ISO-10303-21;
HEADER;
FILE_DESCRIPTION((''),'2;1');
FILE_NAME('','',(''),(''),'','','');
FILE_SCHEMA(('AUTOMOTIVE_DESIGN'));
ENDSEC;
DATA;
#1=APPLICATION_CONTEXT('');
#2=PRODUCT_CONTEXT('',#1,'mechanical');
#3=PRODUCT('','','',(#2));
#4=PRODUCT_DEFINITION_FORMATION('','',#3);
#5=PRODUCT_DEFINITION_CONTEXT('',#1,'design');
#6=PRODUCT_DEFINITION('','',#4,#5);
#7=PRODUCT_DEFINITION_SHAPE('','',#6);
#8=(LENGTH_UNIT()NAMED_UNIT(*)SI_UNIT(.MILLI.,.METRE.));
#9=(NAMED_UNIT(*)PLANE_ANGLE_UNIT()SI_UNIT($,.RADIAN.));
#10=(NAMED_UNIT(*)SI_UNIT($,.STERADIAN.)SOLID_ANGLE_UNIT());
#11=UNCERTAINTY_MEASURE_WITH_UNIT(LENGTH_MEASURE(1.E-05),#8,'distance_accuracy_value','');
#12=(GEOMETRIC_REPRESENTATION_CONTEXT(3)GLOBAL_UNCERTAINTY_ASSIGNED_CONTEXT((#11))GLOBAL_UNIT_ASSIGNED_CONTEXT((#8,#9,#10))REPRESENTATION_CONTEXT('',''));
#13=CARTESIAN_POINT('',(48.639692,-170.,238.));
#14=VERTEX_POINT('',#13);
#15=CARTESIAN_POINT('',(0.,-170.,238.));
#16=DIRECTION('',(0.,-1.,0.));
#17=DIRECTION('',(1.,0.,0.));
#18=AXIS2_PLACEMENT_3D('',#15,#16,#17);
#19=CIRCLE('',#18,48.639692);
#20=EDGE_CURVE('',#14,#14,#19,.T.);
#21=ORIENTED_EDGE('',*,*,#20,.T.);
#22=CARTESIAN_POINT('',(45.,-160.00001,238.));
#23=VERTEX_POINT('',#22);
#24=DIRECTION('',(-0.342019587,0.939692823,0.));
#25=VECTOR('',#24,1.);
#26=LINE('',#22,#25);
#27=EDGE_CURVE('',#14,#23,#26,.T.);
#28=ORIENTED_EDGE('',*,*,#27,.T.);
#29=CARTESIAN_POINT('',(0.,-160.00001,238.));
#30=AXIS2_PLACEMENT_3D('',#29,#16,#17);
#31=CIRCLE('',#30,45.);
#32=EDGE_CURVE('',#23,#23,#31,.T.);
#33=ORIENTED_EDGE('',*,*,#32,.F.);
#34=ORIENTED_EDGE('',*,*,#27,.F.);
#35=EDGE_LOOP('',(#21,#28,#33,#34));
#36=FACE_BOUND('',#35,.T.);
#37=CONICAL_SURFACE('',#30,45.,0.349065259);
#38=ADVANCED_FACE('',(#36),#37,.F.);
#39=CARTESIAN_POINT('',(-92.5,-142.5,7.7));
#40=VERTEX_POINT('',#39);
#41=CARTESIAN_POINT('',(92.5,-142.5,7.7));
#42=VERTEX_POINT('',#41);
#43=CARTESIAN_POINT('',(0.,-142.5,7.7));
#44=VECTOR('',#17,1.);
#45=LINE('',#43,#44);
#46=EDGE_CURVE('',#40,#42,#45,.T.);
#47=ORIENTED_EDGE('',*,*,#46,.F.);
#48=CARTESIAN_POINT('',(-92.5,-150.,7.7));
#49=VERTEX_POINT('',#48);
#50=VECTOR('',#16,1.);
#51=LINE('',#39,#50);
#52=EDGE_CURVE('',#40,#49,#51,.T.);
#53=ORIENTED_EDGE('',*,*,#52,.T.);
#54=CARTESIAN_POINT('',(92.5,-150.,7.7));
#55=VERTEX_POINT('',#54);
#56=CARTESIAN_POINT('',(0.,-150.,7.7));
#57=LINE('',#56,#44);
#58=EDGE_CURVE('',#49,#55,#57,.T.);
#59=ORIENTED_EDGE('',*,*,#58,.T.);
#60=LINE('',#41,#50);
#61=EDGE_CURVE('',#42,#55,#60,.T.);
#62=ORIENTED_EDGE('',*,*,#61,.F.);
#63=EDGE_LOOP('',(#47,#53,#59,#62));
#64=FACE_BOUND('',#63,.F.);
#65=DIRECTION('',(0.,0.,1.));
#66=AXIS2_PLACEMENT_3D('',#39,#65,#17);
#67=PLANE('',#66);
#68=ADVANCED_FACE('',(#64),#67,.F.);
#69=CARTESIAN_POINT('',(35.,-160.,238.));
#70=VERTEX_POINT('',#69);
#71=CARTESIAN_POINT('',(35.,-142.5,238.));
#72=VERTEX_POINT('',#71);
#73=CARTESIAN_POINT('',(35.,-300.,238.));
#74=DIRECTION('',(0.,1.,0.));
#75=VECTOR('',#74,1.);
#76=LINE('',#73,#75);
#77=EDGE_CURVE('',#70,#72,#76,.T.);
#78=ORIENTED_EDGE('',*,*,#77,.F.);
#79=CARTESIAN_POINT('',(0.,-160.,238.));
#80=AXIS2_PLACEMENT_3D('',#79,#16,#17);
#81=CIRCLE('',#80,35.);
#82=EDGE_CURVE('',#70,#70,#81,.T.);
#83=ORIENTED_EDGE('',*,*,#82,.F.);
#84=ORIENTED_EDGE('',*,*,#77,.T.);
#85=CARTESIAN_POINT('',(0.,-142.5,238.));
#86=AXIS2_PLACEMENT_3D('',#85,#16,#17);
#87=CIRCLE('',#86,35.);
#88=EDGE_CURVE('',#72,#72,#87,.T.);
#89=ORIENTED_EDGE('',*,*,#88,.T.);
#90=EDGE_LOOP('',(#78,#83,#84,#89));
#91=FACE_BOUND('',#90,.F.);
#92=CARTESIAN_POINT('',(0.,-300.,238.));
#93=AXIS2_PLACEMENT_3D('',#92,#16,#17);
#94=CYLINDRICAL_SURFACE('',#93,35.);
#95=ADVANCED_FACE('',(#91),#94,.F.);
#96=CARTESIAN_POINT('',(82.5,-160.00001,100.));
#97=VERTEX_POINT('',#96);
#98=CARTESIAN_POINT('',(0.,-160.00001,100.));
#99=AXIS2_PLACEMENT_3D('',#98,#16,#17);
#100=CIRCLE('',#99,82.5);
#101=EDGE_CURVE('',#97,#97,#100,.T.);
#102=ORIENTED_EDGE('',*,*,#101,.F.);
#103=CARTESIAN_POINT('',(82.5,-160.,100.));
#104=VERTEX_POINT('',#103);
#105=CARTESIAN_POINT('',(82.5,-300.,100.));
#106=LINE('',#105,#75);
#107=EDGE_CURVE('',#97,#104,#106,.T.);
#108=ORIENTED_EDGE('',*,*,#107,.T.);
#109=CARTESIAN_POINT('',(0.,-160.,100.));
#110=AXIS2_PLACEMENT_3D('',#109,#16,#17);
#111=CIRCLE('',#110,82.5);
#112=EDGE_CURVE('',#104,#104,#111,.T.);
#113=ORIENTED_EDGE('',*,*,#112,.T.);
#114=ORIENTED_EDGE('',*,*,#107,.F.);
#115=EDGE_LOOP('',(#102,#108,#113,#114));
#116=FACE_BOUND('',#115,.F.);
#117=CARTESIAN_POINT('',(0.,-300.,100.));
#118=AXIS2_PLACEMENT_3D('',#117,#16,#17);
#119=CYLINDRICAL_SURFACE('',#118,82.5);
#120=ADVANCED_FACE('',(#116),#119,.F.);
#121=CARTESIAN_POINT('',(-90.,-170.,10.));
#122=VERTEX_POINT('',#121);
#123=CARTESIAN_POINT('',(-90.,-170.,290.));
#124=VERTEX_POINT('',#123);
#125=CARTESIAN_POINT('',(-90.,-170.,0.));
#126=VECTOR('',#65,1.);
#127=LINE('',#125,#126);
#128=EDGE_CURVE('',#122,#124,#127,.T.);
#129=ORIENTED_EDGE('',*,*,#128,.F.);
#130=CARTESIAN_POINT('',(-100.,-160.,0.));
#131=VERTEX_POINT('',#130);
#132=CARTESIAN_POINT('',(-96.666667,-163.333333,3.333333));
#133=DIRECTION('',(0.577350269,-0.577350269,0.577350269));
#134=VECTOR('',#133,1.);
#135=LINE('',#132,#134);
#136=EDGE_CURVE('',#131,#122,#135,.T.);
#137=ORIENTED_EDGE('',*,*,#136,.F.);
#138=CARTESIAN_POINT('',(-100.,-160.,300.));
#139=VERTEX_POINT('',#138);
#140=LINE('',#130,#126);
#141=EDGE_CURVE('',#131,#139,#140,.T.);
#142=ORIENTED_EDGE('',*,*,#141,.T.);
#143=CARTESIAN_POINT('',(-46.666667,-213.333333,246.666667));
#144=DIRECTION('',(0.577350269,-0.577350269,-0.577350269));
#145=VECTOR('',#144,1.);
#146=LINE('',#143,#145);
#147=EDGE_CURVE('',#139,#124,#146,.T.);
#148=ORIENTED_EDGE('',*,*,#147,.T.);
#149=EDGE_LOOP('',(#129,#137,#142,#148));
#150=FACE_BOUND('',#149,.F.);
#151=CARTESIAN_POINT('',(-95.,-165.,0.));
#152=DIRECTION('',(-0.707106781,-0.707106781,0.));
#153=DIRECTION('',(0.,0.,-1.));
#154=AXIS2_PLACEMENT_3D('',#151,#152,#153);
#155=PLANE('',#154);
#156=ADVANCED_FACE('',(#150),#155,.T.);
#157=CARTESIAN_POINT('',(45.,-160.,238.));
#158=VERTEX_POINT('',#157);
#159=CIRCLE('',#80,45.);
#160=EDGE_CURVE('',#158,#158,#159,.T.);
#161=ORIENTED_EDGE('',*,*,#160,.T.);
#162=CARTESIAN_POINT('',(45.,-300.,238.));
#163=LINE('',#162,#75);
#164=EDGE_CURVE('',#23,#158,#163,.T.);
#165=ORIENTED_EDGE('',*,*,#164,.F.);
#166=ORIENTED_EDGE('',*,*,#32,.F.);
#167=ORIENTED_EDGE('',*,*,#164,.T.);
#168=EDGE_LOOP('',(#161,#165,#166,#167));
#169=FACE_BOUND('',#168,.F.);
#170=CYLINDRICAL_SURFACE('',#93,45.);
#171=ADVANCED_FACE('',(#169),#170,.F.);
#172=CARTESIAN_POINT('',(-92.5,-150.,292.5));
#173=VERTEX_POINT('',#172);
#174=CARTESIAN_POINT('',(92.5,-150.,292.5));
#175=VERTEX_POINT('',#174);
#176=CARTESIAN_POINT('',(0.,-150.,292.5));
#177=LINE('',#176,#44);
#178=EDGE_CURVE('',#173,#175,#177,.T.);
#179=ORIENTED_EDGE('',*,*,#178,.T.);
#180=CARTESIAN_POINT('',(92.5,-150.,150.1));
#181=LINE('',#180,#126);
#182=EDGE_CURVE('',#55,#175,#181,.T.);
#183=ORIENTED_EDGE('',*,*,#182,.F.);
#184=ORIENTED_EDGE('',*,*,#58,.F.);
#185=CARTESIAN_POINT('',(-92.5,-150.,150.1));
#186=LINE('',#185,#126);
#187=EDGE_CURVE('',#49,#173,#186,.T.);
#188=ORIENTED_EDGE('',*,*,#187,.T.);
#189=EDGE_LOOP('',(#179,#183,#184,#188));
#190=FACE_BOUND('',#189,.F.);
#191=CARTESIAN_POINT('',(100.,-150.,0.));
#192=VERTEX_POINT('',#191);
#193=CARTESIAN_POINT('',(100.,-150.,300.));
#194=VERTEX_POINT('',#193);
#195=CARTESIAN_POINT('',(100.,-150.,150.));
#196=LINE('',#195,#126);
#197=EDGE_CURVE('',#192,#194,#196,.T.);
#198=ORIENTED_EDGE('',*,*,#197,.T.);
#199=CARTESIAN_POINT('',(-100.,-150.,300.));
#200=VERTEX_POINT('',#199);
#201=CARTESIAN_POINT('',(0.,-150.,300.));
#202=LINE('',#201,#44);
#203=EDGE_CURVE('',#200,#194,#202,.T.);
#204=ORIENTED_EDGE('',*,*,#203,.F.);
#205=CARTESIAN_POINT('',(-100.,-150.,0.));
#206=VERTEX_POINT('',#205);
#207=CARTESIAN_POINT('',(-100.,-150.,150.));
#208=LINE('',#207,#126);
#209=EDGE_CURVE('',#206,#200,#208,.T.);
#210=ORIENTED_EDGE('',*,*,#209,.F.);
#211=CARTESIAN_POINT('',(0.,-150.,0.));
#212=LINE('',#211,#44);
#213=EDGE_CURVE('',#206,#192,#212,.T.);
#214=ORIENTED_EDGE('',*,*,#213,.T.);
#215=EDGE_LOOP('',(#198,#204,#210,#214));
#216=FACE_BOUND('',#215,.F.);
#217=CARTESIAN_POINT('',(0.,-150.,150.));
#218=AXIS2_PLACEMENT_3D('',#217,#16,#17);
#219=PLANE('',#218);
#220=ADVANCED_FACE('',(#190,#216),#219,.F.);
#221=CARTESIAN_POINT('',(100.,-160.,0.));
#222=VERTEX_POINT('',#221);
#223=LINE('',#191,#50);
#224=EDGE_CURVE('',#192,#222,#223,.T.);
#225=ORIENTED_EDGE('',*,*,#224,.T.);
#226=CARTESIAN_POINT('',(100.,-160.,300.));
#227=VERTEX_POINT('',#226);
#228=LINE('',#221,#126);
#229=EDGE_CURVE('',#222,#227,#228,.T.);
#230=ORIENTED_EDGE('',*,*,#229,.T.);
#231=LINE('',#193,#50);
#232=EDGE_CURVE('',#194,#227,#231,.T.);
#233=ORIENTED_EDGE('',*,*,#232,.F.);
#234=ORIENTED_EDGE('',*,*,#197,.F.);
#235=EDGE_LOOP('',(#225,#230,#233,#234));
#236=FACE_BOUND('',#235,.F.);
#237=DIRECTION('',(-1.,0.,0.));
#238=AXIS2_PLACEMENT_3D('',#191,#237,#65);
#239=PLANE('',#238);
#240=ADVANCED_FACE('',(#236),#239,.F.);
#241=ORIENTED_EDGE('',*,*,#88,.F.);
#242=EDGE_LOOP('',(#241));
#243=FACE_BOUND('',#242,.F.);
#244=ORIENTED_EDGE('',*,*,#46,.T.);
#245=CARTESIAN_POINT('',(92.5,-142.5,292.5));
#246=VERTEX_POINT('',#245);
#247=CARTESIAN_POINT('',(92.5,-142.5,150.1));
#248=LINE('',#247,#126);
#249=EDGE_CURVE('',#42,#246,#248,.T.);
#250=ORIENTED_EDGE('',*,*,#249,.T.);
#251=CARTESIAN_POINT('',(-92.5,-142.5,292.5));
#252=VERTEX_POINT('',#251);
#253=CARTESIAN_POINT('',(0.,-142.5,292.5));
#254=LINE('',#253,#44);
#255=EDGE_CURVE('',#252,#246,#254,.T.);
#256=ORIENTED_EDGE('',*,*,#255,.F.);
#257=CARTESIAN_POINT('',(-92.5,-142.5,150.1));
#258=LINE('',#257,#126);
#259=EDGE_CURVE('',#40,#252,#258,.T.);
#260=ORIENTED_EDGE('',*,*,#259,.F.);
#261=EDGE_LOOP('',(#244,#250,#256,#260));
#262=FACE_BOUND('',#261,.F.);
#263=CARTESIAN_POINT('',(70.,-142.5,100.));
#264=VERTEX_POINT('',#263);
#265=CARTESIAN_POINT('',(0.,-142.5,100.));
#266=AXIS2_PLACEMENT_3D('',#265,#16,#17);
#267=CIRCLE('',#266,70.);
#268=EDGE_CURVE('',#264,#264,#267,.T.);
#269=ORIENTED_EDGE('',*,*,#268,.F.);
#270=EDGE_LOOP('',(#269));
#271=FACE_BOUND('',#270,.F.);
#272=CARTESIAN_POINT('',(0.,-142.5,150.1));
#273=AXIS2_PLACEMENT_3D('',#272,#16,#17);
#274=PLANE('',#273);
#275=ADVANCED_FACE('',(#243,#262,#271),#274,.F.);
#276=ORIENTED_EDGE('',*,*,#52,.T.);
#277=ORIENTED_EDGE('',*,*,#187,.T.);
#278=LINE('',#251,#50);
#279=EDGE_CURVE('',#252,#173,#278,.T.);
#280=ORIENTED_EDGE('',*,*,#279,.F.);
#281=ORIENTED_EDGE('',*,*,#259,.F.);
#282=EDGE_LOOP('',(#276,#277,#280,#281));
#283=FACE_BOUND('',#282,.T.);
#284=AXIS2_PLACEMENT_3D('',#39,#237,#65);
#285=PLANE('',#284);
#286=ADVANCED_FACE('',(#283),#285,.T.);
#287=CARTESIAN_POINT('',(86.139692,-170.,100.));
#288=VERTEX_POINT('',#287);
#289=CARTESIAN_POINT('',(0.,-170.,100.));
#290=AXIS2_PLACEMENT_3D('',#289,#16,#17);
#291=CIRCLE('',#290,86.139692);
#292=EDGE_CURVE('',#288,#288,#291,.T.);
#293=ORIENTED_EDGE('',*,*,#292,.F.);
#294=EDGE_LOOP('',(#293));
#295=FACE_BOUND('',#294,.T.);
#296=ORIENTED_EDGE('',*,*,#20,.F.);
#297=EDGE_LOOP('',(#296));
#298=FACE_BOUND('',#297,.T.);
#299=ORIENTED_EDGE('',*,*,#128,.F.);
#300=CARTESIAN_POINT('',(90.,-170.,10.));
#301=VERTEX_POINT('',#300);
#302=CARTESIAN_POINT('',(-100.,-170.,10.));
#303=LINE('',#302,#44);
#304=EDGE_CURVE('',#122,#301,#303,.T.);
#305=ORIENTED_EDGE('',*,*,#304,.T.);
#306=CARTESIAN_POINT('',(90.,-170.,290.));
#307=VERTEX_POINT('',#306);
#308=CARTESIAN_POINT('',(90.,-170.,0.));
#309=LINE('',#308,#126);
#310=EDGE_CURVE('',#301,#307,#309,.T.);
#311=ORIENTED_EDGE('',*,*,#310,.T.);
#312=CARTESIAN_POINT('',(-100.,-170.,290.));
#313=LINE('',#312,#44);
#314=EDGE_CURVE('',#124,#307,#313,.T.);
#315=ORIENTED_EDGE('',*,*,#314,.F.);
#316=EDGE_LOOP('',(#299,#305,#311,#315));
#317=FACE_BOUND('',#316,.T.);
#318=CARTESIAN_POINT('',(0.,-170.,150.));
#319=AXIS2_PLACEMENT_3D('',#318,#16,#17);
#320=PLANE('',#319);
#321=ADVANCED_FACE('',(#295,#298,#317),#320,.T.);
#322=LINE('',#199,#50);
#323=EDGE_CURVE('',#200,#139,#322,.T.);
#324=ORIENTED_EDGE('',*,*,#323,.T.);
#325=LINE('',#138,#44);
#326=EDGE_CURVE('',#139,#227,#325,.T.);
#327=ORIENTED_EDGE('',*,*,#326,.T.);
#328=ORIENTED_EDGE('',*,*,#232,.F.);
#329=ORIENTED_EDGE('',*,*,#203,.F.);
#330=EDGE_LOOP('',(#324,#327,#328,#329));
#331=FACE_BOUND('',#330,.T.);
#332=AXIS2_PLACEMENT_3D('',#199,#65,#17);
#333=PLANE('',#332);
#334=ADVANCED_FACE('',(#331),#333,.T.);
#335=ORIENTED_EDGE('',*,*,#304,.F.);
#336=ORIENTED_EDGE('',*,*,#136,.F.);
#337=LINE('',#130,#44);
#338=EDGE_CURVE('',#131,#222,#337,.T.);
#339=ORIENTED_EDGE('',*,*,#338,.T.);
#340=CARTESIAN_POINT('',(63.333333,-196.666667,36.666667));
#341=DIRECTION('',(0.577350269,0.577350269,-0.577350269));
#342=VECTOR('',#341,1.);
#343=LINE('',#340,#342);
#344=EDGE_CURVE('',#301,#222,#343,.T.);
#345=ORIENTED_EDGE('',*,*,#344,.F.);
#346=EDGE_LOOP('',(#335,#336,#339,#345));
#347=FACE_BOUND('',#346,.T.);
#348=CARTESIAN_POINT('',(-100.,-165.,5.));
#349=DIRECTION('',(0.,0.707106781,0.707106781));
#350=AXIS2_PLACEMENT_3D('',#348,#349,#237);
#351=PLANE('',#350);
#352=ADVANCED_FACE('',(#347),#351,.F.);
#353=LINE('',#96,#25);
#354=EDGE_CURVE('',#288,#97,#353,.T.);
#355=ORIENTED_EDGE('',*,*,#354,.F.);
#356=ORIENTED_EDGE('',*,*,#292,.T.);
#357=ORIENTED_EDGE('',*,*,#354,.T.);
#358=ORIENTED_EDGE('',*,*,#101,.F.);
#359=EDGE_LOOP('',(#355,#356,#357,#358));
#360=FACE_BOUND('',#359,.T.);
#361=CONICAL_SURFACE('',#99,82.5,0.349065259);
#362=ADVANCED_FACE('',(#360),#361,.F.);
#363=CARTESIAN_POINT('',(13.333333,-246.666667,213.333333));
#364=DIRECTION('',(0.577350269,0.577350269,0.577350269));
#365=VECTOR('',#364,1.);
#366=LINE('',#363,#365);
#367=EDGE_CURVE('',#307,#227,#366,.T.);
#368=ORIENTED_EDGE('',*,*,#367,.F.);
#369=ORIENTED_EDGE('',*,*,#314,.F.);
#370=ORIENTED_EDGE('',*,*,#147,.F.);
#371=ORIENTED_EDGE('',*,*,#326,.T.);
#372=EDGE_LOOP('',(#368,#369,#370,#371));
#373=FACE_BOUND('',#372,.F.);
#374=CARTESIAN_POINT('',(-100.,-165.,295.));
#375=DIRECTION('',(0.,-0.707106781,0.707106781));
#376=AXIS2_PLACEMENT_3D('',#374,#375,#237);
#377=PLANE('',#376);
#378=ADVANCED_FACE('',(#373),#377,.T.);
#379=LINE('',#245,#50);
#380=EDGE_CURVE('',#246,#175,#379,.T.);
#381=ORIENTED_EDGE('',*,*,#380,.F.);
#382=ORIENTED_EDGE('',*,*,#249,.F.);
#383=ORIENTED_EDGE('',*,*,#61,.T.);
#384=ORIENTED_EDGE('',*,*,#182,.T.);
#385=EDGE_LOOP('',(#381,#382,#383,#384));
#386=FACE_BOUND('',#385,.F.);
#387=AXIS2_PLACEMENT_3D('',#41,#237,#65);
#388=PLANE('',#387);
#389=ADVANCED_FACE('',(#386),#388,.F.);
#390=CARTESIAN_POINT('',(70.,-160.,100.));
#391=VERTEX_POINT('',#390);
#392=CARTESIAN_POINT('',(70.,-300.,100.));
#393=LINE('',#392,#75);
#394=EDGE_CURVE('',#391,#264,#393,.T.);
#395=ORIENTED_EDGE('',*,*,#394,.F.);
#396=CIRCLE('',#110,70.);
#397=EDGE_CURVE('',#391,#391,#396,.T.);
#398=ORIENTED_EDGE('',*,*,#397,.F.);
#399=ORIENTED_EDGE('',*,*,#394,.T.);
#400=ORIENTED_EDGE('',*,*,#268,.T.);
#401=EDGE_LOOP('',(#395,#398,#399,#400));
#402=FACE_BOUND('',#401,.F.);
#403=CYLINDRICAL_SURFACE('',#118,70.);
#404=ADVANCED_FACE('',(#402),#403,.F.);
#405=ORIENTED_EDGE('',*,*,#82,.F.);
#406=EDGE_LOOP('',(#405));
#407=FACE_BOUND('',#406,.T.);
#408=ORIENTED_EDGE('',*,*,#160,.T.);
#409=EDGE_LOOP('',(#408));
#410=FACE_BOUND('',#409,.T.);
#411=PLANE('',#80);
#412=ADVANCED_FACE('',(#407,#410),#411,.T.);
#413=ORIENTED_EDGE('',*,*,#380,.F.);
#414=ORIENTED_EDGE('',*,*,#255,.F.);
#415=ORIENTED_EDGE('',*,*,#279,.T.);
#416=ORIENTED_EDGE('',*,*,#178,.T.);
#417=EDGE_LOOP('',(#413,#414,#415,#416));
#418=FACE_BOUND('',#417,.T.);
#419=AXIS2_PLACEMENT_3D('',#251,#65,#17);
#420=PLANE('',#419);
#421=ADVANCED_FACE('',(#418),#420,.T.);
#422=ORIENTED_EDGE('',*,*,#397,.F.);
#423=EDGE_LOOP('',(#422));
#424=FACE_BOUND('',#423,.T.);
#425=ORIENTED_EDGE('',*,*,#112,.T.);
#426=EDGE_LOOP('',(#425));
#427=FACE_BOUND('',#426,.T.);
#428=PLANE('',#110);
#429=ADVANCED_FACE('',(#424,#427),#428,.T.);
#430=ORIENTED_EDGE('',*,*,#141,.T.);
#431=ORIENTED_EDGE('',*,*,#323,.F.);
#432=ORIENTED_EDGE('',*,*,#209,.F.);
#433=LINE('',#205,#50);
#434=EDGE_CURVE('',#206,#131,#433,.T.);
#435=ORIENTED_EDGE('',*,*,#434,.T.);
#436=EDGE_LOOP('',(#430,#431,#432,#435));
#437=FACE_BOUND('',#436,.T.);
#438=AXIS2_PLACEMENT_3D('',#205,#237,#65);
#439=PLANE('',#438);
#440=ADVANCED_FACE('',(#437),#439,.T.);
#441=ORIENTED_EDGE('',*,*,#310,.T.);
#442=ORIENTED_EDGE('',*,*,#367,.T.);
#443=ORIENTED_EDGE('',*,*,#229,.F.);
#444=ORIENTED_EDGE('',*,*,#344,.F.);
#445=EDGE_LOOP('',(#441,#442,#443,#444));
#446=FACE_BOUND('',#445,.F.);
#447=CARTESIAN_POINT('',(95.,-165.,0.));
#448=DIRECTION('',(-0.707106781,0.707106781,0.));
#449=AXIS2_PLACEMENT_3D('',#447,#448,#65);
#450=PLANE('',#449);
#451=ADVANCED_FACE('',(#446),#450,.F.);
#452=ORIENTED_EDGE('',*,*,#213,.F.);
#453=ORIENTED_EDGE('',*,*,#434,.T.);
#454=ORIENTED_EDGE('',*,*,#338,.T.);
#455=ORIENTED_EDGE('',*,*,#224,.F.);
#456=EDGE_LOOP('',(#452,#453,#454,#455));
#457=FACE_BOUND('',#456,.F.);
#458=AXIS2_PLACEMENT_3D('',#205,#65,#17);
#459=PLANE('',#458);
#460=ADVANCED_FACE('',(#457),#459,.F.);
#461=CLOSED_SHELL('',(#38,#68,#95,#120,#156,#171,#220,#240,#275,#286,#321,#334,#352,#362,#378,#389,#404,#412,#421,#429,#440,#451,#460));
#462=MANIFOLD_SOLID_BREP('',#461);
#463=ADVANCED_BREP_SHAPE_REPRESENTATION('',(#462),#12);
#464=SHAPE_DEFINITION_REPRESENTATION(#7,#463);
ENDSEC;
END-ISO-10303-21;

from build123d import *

# Parameters (mm, degrees)
F9_W      = 185
F9_H      = 284.8
F10_DEPTH = 7.5
F11_W     = 200
F11_H     = 300
F12_DEPTH = 20
F16_R     = 70
F17_DEPTH = 157.5
F18_R     = 82.5
F19_DEPTH = 140
F20_R     = 35
F21_DEPTH = 157.5
F22_R     = 45
F23_DEPTH = 140
F13_W     = 40
F13_H     = 300
F24_DEPTH = 200
F25_SIZE  = 10
F26_SIZE2 = 9.99999
F26_SIZE  = 3.639692
F27_SIZE2 = 9.99999
F27_SIZE  = 3.639692


# Not quite as in the source:
# - a fillet or chamfer is up to 0.001 mm smaller than in the source, because OpenCascade refuses the exact size


with BuildPart() as f10:
    # F9 (on offset) → F10 (new body)
    with BuildSketch(Plane.XZ.offset(142.5)):
        with Locations((0, 150.1)):
            Rectangle(F9_W, F9_H)
    extrude(amount=F10_DEPTH)

    # F11 (on offset) → F12 (join)
    with BuildSketch(Plane.XZ.offset(150)):
        with Locations((0, 150)):
            Rectangle(F11_W, F11_H)
    extrude(amount=F12_DEPTH)

    # F16 (on offset) → F17 (cut, through all)
    with BuildSketch(Plane.XZ.offset(300)):
        with Locations((0, 100)):
            Circle(F16_R)
    extrude(amount=-F17_DEPTH, mode=Mode.SUBTRACT)

    # F18 (on offset) → F19 (cut, through all)
    with BuildSketch(Plane.XZ.offset(300)):
        with Locations((0, 100)):
            Circle(F18_R)
    extrude(amount=-F19_DEPTH, mode=Mode.SUBTRACT)

    # F20 (on offset) → F21 (cut, through all)
    with BuildSketch(Plane.XZ.offset(300)):
        with Locations((0, 238)):
            Circle(F20_R)
    extrude(amount=-F21_DEPTH, mode=Mode.SUBTRACT)

    # F22 (on offset) → F23 (cut, through all)
    with BuildSketch(Plane.XZ.offset(300)):
        with Locations((0, 238)):
            Circle(F22_R)
    extrude(amount=-F23_DEPTH, mode=Mode.SUBTRACT)

    # F13 (on offset) → F24 (cut, through all)
    with BuildSketch(Plane.YZ.offset(100)):
        with Locations((-200, 150)):
            Rectangle(F13_W, F13_H)
    extrude(amount=-F24_DEPTH, mode=Mode.SUBTRACT)

    # F25
    f25_edges = [f10.edges().sort_by_distance(p)[0] for p in [
        (100, -170, 150),
        (0, -170, 300),
        (-100, -170, 150),
        (0, -170, 0),
    ]]
    chamfer(f25_edges, length=F25_SIZE)

    # F26 (size 3.6397023427 and 10 in the source; OpenCascade refuses exactly that, so slightly less here)
    f26_edges = [f10.edges().sort_by_distance(p)[0] for p in [
        (-82.5, -170, 100),
    ]]
    f26_side = f10.faces().sort_by_distance((86.671337, -170, 150))[0]
    chamfer(f26_edges, length=F26_SIZE, length2=F26_SIZE2, reference=f26_side)

    # F27 (size 3.6397023427 and 10 in the source; OpenCascade refuses exactly that, so slightly less here)
    f27_edges = [f10.edges().sort_by_distance(p)[0] for p in [
        (-45, -170, 238),
    ]]
    f27_side = f10.faces().sort_by_distance((-89.468355, -170, 100))[0]
    chamfer(f27_edges, length=F27_SIZE, length2=F27_SIZE2, reference=f27_side)


solid = f10.part
